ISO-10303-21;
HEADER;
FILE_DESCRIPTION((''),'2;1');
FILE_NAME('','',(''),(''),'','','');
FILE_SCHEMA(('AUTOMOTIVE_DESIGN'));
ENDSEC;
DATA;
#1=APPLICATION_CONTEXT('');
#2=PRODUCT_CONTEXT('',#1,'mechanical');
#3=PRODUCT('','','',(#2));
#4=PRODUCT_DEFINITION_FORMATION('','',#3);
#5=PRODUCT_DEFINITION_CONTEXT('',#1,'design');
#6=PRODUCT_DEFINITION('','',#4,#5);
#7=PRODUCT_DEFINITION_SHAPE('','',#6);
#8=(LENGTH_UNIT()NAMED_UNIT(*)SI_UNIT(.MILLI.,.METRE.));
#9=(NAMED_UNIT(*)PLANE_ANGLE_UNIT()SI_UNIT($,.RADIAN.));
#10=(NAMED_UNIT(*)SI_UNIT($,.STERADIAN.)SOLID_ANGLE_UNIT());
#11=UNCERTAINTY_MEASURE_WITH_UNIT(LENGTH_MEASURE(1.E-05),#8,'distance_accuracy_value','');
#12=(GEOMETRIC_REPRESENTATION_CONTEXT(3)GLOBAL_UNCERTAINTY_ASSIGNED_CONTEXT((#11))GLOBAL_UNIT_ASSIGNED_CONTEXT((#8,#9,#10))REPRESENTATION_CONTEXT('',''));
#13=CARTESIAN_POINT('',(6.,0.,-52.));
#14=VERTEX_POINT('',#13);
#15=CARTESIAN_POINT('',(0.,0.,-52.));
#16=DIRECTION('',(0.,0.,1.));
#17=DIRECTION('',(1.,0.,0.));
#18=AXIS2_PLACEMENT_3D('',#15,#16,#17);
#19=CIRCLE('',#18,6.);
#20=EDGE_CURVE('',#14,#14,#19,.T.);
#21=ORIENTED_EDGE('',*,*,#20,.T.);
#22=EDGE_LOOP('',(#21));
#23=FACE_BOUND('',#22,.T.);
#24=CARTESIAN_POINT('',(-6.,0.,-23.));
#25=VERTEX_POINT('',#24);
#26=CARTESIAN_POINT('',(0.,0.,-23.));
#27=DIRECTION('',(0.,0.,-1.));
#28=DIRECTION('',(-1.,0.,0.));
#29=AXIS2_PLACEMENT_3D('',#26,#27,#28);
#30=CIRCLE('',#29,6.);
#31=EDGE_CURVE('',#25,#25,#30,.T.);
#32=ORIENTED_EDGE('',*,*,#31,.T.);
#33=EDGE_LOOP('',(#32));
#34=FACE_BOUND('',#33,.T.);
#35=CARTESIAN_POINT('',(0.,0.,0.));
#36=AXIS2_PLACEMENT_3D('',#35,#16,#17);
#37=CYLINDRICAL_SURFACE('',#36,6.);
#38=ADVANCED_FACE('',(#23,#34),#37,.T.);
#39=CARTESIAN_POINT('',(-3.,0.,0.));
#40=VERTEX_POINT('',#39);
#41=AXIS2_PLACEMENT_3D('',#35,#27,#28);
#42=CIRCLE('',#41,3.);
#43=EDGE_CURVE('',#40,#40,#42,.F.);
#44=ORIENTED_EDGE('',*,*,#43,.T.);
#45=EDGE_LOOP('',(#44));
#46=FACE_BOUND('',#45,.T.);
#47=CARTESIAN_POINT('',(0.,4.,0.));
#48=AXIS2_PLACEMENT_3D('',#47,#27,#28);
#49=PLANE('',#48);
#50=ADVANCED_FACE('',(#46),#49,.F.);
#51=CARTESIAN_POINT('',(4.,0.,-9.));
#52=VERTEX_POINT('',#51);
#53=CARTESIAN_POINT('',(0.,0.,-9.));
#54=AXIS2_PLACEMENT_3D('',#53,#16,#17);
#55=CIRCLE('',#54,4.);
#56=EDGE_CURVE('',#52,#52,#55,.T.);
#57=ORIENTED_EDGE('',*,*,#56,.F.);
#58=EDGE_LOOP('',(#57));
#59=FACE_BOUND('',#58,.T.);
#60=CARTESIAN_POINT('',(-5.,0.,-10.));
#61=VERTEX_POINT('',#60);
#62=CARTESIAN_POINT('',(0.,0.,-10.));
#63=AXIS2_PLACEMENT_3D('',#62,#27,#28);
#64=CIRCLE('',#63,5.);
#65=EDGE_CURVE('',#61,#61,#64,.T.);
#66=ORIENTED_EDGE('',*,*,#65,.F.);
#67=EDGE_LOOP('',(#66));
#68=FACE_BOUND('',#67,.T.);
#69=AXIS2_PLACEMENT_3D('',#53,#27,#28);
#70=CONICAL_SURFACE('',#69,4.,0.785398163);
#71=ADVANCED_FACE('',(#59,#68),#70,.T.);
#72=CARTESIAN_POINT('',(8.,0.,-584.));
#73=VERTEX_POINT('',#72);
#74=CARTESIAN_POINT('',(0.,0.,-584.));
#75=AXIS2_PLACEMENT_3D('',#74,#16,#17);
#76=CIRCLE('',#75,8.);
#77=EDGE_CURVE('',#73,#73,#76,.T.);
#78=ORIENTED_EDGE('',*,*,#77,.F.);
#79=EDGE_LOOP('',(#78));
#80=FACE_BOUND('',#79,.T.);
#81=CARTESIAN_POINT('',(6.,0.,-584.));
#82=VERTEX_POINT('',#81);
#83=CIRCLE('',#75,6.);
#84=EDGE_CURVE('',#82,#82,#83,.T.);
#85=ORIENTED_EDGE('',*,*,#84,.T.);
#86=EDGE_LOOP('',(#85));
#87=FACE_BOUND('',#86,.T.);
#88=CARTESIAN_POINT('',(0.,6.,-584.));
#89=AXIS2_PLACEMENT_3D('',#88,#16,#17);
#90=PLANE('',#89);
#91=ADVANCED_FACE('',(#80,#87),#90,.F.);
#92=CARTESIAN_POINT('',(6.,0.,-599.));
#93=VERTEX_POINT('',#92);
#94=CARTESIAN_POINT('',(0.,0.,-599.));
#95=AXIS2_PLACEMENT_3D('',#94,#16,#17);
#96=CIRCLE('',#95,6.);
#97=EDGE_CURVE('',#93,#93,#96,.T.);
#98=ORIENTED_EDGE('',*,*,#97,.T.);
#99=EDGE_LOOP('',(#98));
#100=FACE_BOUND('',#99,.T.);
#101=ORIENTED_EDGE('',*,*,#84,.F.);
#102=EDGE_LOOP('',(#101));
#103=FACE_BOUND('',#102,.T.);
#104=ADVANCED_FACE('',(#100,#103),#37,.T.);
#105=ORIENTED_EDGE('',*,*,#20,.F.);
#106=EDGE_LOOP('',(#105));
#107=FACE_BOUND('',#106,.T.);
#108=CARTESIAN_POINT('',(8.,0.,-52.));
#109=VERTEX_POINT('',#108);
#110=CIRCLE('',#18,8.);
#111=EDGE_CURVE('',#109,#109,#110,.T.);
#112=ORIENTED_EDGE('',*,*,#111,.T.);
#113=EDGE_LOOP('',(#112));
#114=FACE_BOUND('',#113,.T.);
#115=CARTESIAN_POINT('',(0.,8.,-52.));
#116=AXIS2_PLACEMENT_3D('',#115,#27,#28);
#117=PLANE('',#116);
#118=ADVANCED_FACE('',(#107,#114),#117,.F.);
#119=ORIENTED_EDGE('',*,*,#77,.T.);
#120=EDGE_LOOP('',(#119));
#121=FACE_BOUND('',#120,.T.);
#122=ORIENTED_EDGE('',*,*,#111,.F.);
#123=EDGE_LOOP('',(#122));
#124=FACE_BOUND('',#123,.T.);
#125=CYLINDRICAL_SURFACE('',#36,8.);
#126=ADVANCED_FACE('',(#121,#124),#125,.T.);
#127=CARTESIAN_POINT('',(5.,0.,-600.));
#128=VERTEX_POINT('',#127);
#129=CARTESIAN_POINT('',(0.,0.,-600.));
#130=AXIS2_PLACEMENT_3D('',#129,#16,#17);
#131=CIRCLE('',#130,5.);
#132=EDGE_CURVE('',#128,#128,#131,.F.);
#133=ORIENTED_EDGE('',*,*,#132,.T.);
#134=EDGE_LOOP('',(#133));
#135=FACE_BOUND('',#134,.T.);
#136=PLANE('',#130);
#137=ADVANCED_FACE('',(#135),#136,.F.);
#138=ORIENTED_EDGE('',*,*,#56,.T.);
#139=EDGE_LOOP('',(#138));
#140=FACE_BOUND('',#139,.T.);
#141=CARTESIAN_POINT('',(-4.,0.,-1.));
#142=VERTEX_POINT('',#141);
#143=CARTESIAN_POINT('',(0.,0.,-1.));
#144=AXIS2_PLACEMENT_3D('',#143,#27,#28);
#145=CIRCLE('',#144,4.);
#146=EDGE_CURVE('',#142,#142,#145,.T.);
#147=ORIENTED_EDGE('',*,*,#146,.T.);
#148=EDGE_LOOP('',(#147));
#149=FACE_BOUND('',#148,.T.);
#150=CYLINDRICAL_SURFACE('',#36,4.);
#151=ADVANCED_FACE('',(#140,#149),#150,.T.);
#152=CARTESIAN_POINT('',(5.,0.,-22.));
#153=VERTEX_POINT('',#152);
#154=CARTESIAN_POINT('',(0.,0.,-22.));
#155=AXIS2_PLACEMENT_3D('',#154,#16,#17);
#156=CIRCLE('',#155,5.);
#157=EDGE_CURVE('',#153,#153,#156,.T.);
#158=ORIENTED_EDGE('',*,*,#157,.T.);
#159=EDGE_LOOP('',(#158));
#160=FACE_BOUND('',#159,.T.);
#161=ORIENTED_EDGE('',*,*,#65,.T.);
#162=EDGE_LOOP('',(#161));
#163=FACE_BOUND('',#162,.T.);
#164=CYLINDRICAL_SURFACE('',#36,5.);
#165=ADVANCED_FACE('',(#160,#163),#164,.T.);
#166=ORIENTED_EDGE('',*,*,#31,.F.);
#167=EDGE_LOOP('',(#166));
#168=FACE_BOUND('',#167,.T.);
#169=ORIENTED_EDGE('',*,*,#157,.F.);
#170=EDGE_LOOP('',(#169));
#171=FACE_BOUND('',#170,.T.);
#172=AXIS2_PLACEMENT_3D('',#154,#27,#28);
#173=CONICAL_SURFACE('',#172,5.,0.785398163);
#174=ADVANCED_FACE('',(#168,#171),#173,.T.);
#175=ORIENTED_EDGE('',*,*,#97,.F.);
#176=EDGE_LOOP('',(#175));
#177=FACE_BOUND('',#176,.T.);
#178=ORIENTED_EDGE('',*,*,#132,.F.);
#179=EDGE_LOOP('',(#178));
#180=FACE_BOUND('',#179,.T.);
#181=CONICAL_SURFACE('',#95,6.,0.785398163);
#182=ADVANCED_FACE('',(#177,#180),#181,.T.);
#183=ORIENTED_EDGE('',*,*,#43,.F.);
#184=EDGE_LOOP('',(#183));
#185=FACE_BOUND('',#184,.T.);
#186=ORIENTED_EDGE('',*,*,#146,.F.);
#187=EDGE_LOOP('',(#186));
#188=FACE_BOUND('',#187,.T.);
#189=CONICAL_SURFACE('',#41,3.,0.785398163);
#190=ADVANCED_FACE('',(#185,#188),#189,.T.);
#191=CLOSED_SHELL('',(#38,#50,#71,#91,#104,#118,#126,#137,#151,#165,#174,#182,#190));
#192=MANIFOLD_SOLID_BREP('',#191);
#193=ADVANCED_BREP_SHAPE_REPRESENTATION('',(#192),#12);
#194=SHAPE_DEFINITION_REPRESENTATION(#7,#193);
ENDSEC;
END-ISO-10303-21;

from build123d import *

# Parameters (mm, degrees)
SFAZOWANIE1_SIZE = 1
SFAZOWANIE2_SIZE = 1


with BuildPart() as part:
    # Szkic1 → Obrót1 (revolve)
    with BuildSketch(Plane(origin=(0, 0, 0), x_dir=(0, 0, -1), z_dir=(1, 0, 0)), mode=Mode.PRIVATE) as obr_t1_sk:
        Polygon((0, 0), (600, 0), (600, 6), (584, 6), (584, 8), (52, 8), (52, 6), (22, 6), (22, 5), (9, 5), (9, 4), (0, 4), align=None)
    revolve(obr_t1_sk.sketch.rotate(Axis((0, 0, 0), (0, 0, -1)), 90), axis=Axis((0, 0, 0), (0, 0, -1)))

    # Sfazowanie1
    sfazowanie1_edges = [part.edges().sort_by_distance(p)[0] for p in [
        (-6, 0, -22),
        (-4, 0, 0),
        (-5, 0, -9),
    ]]
    chamfer(sfazowanie1_edges, length=SFAZOWANIE1_SIZE - 0.0001)  # a hair under: the kernel refuses the full size

    # Sfazowanie2
    sfazowanie2_edges = [part.edges().sort_by_distance(p)[0] for p in [
        (-6, 0, -600),
    ]]
    chamfer(sfazowanie2_edges, length=SFAZOWANIE2_SIZE)


solid = part.part
